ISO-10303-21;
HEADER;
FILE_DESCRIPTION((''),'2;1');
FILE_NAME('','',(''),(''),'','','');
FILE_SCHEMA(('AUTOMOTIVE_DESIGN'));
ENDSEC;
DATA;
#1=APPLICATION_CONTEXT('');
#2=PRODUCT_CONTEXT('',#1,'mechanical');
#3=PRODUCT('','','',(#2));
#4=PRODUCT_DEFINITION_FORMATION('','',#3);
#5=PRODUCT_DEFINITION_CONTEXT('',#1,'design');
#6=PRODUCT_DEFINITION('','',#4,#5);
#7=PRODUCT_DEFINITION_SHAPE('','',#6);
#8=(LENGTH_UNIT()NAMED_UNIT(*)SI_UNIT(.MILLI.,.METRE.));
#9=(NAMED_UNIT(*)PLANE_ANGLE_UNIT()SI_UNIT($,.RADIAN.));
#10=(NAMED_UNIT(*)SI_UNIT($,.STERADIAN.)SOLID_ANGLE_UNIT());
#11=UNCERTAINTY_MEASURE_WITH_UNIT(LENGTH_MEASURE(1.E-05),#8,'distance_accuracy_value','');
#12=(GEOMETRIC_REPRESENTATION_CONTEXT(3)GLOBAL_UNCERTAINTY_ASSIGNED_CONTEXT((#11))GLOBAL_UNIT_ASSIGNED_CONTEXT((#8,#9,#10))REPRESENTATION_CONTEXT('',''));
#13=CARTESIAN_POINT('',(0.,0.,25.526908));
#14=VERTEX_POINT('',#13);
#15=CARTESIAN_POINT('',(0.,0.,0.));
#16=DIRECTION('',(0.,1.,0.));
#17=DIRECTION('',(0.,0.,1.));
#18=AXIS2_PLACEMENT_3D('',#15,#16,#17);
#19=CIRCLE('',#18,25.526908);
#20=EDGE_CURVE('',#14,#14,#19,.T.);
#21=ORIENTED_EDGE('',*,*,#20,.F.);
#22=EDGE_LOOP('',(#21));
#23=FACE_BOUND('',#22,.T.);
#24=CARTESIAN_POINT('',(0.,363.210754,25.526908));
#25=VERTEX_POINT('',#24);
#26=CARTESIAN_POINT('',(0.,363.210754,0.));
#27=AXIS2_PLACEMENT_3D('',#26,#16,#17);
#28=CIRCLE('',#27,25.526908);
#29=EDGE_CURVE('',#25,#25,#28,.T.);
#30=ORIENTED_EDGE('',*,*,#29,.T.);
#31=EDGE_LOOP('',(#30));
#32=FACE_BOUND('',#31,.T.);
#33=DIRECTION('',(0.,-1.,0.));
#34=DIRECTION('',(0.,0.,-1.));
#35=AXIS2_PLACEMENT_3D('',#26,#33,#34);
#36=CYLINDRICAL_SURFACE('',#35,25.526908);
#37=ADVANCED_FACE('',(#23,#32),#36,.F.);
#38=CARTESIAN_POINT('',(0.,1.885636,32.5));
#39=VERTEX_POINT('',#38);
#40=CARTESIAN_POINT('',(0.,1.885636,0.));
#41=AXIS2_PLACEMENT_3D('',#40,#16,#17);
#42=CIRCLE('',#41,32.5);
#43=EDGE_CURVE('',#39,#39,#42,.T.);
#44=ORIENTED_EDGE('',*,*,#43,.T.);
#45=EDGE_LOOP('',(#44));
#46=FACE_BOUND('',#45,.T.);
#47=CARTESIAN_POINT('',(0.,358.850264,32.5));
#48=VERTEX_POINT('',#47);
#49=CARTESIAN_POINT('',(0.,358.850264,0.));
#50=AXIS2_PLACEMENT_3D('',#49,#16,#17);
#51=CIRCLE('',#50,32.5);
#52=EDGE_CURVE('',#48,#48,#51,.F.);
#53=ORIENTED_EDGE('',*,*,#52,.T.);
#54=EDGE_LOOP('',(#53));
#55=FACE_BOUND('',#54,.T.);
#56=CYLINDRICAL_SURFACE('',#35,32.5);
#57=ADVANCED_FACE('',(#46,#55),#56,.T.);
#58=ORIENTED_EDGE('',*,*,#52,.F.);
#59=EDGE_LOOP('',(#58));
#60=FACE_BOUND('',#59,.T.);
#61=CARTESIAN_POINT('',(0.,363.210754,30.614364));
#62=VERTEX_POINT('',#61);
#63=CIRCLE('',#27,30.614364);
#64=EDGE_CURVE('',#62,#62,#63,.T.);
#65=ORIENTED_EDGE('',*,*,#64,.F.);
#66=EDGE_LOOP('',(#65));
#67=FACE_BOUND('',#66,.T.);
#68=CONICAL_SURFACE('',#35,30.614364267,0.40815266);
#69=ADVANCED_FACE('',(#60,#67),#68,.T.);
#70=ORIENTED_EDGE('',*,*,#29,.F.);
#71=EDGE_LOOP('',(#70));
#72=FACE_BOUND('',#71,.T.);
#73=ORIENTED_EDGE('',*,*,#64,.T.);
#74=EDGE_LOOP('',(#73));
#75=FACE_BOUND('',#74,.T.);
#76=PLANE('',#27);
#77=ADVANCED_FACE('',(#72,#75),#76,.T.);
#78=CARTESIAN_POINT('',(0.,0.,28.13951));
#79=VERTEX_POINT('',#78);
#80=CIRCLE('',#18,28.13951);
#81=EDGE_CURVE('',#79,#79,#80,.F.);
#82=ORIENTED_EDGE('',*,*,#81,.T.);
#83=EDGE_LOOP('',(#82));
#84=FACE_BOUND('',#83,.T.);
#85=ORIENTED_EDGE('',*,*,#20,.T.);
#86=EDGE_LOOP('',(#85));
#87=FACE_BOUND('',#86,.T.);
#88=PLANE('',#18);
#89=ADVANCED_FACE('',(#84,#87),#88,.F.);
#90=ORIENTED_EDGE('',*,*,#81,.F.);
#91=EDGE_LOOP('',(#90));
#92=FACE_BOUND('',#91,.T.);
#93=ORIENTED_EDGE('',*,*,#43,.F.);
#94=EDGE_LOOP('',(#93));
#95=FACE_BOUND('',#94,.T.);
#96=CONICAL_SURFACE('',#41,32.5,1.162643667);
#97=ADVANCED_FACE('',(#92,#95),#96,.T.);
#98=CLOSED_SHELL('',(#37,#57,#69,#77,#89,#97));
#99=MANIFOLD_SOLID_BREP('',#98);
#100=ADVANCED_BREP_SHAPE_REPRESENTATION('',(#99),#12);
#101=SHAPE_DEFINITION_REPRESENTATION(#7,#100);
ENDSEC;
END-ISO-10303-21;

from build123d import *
from OCP.BRepFilletAPI import BRepFilletAPI_MakeChamfer

# Parameters (mm, degrees)
SKETCH1_R           = 32.5
BOSS_EXTRUDE1_DEPTH = 363.210754451
SKETCH2_R           = 25.526908411
CUT_EXTRUDE1_DEPTH  = 367.107295951
CHAMFER1_SIZE       = 4.360490072
CHAMFER1_SIZE2      = 1.885635733


with BuildPart() as part:
    # Sketch1 → Boss-Extrude1 (new body)
    with BuildSketch(Plane(origin=(0, 0, 0), x_dir=(1, 0, 0), z_dir=(0, 1, 0))):
        Circle(SKETCH1_R)
    extrude(amount=BOSS_EXTRUDE1_DEPTH)

    # Sketch2 → Cut-Extrude1 (cut, through all)
    with BuildSketch(Plane(origin=(0, 0, 0), x_dir=(1, 0, 0), z_dir=(0, 1, 0))):
        Circle(SKETCH2_R)
    extrude(amount=CUT_EXTRUDE1_DEPTH, mode=Mode.SUBTRACT)

    # Chamfer1: one chamfer whose edges measure the first distance from different faces: ONE call of the kernel's chamfer builder (chamfer() names one face for all edges)
    chamfer1_edges_1 = [part.edges().sort_by_distance(p)[0] for p in [
        (-32.5, 363.210754451, 0),
    ]]
    chamfer1_side_1 = [part.faces().sort_by_distance(p)[0] for p in [
        (-32.5, 181.605377225, 0),
    ]]
    chamfer1_edges_2 = [part.edges().sort_by_distance(p)[0] for p in [
        (-32.5, 0, 0),
    ]]
    chamfer1_side_2 = [part.faces().sort_by_distance(p)[0] for p in [
        (-31.580761184, 0, 0),
    ]]
    chamfer1 = BRepFilletAPI_MakeChamfer(part.part.solid().wrapped)
    for e in chamfer1_edges_1:
        chamfer1.Add(CHAMFER1_SIZE, CHAMFER1_SIZE2, e.wrapped, chamfer1_side_1[0].wrapped)  # the first distance lies on this face
    for e in chamfer1_edges_2:
        chamfer1.Add(CHAMFER1_SIZE, CHAMFER1_SIZE2, e.wrapped, chamfer1_side_2[0].wrapped)  # the first distance lies on this face
    add(Compound.cast(chamfer1.Shape()), mode=Mode.REPLACE)


solid = part.part
